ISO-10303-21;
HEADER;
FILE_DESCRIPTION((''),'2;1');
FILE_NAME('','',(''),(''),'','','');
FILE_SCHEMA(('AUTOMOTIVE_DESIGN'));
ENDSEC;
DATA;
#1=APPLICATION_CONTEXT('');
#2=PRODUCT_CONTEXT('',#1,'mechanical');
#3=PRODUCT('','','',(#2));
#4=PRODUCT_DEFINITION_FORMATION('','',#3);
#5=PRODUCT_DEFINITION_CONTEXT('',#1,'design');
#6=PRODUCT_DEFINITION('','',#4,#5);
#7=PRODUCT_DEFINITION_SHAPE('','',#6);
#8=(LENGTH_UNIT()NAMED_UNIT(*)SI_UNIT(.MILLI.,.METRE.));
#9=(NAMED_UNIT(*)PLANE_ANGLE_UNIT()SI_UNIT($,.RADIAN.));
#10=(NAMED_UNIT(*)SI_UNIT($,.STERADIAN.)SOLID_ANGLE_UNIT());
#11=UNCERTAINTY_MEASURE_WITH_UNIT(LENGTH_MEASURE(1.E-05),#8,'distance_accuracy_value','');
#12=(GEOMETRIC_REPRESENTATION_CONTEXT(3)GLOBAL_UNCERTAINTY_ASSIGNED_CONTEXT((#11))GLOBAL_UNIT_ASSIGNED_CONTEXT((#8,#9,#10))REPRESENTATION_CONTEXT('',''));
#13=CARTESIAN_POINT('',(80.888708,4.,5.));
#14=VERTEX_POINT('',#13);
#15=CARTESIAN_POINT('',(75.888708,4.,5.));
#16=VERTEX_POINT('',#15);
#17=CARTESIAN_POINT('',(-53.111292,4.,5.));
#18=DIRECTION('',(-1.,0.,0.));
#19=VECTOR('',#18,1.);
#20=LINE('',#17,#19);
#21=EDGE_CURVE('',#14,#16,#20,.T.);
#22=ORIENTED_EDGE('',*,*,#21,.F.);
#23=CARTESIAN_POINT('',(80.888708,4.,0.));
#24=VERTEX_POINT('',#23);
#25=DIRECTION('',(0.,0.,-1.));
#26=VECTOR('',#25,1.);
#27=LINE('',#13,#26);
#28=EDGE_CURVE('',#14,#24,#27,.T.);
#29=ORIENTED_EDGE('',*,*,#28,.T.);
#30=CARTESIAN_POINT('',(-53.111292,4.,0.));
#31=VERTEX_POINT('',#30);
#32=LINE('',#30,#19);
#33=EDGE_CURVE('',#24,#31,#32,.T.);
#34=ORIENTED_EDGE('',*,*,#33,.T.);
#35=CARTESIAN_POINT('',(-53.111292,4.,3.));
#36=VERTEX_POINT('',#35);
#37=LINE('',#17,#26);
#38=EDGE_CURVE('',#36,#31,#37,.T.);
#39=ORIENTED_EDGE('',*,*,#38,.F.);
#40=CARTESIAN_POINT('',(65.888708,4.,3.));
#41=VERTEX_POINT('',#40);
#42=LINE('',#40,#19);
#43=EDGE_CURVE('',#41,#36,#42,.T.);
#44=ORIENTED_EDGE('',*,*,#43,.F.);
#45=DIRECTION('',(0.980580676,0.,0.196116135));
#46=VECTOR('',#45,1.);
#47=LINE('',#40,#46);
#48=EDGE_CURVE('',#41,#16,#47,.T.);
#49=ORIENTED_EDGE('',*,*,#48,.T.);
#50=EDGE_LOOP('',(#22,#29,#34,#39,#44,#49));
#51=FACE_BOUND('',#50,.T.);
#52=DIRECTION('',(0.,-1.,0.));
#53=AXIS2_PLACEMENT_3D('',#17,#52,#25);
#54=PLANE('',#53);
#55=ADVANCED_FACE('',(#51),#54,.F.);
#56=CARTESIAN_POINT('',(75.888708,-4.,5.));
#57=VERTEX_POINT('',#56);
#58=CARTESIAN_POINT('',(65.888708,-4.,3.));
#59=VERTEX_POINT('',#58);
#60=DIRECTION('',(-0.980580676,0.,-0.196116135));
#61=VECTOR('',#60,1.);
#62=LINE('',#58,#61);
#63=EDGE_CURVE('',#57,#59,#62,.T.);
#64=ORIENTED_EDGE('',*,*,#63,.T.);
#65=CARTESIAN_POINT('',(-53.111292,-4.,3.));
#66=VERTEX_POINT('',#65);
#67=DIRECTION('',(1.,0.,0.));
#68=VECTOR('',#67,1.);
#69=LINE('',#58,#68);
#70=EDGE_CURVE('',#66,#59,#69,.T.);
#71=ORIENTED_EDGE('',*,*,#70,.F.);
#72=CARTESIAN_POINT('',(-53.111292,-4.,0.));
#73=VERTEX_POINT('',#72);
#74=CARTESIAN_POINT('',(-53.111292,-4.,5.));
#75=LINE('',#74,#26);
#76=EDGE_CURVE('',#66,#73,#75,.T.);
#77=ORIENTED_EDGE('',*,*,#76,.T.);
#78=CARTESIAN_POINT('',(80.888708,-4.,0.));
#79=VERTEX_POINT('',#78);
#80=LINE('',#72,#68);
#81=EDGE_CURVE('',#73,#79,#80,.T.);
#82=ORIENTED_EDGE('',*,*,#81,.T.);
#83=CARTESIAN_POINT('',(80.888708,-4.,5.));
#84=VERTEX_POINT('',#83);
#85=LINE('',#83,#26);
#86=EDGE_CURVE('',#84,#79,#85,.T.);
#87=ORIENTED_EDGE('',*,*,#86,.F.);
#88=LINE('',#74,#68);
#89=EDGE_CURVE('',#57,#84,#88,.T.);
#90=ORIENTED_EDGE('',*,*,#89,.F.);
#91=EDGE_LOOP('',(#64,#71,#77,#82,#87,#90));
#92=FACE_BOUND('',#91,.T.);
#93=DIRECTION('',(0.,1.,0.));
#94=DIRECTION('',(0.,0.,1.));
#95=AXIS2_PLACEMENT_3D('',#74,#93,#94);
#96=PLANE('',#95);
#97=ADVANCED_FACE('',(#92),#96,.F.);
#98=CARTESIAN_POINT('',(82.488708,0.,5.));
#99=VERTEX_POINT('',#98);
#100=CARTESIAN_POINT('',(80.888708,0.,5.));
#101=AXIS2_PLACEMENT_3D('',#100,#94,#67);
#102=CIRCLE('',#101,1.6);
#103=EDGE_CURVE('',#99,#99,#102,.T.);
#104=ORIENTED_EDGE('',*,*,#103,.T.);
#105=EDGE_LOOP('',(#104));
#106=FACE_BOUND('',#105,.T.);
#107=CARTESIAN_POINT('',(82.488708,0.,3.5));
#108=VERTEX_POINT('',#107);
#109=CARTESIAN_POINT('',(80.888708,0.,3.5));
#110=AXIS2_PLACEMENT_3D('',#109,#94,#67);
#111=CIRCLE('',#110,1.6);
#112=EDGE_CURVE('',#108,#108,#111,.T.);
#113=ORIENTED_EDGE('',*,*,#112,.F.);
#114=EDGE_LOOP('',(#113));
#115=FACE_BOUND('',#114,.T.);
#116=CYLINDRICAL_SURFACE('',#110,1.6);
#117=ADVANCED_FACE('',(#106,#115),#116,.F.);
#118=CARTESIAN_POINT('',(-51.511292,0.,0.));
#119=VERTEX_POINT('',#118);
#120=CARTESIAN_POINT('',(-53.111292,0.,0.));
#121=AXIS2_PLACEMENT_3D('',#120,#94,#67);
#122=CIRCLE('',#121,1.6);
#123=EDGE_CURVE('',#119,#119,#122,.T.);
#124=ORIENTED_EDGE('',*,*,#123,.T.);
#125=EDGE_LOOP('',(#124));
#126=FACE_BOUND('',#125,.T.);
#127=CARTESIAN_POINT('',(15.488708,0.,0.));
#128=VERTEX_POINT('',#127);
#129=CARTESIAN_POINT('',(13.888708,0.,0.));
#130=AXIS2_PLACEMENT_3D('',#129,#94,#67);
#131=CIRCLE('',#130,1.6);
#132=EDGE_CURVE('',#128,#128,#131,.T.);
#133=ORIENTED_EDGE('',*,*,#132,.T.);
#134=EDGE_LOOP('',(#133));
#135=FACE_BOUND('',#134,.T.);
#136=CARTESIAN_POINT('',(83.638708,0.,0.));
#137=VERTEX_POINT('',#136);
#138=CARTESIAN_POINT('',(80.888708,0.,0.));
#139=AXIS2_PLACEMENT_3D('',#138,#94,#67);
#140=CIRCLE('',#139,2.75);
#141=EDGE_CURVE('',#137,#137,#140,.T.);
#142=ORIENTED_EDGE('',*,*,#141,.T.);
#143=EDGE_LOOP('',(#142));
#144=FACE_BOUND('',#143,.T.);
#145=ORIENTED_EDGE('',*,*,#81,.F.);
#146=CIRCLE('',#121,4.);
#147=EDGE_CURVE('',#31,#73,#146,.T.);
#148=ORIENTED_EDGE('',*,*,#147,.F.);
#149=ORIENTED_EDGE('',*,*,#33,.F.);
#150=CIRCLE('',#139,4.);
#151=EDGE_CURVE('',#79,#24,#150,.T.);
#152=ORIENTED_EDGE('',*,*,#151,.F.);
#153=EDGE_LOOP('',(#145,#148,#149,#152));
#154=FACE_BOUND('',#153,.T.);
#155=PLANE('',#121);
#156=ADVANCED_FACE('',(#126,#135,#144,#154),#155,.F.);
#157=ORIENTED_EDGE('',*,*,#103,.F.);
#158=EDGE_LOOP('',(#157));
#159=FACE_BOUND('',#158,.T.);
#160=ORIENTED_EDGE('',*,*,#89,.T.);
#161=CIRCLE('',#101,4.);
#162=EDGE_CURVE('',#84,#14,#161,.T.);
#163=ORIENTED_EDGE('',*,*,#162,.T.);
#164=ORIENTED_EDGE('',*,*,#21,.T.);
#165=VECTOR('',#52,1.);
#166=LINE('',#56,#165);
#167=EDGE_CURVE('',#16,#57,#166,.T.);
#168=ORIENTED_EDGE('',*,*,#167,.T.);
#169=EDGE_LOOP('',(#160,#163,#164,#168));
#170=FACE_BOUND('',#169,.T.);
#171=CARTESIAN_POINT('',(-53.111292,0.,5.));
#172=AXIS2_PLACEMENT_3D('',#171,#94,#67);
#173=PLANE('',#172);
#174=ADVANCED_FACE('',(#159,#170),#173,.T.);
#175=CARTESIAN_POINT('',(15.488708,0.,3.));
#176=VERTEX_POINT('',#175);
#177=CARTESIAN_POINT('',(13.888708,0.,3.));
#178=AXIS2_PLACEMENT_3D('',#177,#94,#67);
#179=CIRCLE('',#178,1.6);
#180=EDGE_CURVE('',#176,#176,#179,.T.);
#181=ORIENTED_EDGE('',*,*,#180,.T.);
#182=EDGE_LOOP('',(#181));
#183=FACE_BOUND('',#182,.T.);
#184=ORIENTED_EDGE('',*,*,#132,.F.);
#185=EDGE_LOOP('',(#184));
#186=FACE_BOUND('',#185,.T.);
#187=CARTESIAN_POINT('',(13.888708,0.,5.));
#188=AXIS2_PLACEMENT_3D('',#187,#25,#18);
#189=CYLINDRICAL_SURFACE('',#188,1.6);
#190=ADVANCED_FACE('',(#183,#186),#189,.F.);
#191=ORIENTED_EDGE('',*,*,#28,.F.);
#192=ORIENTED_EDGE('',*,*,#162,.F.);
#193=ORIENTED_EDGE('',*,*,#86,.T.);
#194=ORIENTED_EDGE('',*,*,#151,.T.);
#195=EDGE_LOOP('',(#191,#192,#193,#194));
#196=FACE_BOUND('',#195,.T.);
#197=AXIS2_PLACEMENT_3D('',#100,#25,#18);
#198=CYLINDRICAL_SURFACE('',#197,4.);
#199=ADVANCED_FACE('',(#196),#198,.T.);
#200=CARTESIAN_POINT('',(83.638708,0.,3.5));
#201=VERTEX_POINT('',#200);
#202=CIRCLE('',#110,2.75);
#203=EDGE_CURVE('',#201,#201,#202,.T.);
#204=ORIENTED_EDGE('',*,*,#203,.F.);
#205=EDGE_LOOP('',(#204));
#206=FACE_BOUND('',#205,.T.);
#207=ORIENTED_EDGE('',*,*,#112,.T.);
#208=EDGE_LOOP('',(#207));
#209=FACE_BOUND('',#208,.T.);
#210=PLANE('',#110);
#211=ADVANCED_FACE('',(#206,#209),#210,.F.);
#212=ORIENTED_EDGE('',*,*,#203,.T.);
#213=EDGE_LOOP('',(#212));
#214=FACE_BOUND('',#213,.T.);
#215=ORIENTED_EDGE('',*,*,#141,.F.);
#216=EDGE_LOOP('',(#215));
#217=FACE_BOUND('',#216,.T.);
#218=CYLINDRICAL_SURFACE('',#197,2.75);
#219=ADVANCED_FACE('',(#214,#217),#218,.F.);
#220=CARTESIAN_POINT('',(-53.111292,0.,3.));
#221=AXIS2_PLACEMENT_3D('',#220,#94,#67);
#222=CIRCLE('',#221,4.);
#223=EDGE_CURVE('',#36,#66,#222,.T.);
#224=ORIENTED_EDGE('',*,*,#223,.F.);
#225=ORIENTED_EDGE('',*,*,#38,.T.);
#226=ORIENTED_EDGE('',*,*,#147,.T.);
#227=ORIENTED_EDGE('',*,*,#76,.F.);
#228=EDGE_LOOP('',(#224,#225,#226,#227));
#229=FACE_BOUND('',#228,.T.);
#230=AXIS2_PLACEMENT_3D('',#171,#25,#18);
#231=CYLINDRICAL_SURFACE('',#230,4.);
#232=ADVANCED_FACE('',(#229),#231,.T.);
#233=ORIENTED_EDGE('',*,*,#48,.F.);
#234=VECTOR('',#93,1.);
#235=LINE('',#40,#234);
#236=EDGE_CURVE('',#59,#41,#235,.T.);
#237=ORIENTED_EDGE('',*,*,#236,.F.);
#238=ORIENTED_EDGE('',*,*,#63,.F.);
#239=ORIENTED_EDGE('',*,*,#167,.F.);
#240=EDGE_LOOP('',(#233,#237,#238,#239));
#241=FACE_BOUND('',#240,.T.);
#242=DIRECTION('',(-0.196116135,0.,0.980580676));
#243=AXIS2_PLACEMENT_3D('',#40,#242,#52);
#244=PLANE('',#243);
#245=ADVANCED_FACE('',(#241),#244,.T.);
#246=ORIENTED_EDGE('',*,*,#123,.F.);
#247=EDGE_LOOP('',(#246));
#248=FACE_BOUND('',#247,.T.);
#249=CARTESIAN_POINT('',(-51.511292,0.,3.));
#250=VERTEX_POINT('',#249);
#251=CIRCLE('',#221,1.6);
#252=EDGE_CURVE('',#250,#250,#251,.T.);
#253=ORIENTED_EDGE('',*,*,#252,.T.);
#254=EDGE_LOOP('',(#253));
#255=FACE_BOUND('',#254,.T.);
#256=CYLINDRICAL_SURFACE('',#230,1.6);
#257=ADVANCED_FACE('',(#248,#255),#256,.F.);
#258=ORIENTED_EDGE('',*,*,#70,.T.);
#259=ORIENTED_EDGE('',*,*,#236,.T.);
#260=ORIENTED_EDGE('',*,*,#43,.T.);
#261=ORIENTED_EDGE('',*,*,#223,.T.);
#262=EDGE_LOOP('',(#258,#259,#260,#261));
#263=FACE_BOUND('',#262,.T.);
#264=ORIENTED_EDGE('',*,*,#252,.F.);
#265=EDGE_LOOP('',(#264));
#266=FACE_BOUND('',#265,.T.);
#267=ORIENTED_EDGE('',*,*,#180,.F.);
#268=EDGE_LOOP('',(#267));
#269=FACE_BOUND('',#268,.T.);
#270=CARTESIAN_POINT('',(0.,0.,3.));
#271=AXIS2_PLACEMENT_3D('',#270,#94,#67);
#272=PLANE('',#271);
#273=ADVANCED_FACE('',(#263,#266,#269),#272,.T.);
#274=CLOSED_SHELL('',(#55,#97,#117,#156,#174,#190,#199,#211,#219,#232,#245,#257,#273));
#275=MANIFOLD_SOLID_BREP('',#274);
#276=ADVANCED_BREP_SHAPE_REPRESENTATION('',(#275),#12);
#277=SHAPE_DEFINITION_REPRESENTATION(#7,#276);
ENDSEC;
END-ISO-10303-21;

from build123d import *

# Parameters (mm, degrees)
SKETCH_1_R          = 2.75
SKETCH_1_R_2        = 1.6
EXTRUDE_1_DEPTH     = 5
EXTRUDE_START       = -1.5
SKETCH_2_R          = 2.75
SKETCH_2_R_2        = 1.6
EXTRUDE_2_DEPTH     = 1.5
SKETCH_3_W          = 127
SKETCH_3_H          = 8
CUT_EXTRUDE_1_DEPTH = 2
CHAMFER_1_SIZE2     = 2
CHAMFER_1_SIZE      = 10


with BuildPart() as part:
    # 草圖1 → 填料-伸長1 (new body)
    with BuildSketch(Plane.XY):
        with BuildLine():
            Line((-53.111291809, 4), (80.888708191, 4))
            ThreePointArc((80.888708191, 4), (84.888708191, 0), (80.888708191, -4))
            Line((80.888708191, -4), (-53.111291809, -4))
            ThreePointArc((-53.111291809, -4), (-57.111291809, 0), (-53.111291809, 4))
        make_face()
        with Locations((80.888708191, 0)):
            Circle(SKETCH_1_R, mode=Mode.SUBTRACT)
        with Locations((-53.111291809, 0)):
            Circle(SKETCH_1_R_2, mode=Mode.SUBTRACT)
        with Locations((13.888708191, 0)):
            Circle(SKETCH_1_R_2, mode=Mode.SUBTRACT)
    extrude(amount=EXTRUDE_1_DEPTH)

    # 草圖2 → 填料-伸長2 (add)
    with BuildSketch(Plane.XY.offset(5).offset(EXTRUDE_START)):
        with Locations((80.888708191, 0)):
            Circle(SKETCH_2_R)
        with Locations((80.888708191, 0)):
            Circle(SKETCH_2_R_2, mode=Mode.SUBTRACT)
    extrude(amount=EXTRUDE_2_DEPTH)

    # 草圖3 → 除料-伸長1 (cut)
    with BuildSketch(Plane.XY.offset(5)):
        with Locations((2.388708191, 0)):
            Rectangle(SKETCH_3_W, SKETCH_3_H)
    extrude(amount=-CUT_EXTRUDE_1_DEPTH, mode=Mode.SUBTRACT)

    # 導角1
    chamfer_1_edges = [part.edges().sort_by_distance(p)[0] for p in [
        (65.888708191, 0, 5),
    ]]
    chamfer_1_side = [part.faces().sort_by_distance(p)[0] for p in [
        (65.928708191, 0, 5),
    ]]
    chamfer(chamfer_1_edges, length=CHAMFER_1_SIZE - 0.0001, length2=CHAMFER_1_SIZE2 - 0.0001, reference=chamfer_1_side[0])  # a hair under: the kernel refuses the full size


solid = part.part
